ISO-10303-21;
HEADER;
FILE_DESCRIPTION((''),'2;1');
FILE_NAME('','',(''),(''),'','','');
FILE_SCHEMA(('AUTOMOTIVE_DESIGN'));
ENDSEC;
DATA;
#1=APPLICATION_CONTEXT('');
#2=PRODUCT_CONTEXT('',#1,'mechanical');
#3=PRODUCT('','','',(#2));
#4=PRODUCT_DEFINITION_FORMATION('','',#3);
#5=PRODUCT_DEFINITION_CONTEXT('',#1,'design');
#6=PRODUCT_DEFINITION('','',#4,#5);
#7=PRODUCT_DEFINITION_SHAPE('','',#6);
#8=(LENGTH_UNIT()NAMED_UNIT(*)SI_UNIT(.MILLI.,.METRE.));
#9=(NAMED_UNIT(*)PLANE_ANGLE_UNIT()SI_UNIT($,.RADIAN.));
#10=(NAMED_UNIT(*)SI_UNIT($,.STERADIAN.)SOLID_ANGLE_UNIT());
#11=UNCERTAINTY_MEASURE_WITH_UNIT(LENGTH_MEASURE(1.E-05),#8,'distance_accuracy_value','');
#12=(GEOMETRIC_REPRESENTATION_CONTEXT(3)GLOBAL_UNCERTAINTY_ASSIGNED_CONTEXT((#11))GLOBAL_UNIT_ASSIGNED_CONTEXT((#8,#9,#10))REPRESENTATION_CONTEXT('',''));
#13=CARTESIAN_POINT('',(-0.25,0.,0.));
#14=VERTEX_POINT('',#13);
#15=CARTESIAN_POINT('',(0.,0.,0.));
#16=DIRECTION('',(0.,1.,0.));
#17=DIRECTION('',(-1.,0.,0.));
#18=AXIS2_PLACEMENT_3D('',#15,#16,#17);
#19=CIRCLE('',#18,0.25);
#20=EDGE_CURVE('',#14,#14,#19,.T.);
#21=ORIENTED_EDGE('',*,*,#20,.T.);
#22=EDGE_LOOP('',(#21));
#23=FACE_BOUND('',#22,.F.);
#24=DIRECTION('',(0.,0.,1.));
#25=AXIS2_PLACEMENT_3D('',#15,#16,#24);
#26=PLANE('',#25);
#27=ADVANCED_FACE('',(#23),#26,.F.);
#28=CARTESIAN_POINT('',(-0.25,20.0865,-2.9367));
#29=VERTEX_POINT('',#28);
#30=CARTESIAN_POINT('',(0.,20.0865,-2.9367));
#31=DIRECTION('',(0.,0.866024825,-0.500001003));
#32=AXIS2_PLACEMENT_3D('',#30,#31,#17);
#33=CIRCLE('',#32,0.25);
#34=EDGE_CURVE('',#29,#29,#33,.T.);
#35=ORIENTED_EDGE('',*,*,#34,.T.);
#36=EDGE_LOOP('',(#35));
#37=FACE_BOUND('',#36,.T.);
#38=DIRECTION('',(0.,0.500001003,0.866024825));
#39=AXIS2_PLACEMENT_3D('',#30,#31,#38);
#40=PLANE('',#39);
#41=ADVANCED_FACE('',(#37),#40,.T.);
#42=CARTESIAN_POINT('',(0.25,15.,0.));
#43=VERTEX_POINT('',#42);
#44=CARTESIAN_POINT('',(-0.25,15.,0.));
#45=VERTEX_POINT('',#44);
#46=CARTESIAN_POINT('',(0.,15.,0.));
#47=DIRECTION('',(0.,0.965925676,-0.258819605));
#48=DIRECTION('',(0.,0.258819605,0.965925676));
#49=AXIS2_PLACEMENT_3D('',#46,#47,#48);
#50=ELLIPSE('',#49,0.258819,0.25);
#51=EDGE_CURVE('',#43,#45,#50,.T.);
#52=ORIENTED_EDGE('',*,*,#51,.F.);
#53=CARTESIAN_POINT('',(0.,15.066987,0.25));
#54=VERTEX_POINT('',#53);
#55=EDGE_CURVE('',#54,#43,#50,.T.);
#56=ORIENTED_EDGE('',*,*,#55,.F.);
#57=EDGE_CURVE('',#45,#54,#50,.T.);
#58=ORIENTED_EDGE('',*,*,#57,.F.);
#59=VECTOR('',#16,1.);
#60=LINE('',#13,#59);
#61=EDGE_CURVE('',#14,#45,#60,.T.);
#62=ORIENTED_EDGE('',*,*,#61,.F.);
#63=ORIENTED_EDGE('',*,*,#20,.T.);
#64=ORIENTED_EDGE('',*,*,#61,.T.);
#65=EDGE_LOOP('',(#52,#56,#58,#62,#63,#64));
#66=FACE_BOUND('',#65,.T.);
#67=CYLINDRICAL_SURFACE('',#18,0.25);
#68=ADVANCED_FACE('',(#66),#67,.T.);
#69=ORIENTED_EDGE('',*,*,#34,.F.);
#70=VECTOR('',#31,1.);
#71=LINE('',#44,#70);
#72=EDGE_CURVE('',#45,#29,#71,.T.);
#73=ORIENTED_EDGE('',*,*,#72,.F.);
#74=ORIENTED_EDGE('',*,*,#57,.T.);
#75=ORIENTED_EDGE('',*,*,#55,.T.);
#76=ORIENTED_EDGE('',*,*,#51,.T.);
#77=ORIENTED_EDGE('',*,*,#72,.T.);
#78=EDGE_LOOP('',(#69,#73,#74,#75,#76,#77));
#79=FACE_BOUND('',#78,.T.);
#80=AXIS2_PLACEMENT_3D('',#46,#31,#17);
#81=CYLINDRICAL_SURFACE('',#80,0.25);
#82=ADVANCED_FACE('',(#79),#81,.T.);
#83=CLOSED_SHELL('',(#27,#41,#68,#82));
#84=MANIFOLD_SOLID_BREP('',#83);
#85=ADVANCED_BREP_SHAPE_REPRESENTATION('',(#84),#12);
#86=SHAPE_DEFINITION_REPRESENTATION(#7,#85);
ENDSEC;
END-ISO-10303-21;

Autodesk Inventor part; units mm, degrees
ref_plane "YZ Plane" through (0, 0, 0) normal (1, 0, 0) x (0, 1, 0)
ref_plane "XZ Plane" through (0, 0, 0) normal (0, 1, 0) x (-1, 0, 0)
ref_plane "XY Plane" through (0, 0, 0) normal (0, 0, 1) x (1, 0, 0)
sketch "Sketch1" plane through (0, 0, 0) normal (0, 1, 0) x (-1, 0, 0)
  circle A0 centre (0, 0) radius 0.25
  dimension "d0" = 0.5
sketch "Sketch2" plane through (0, 0, 0) normal (1, 0, 0) x (0, 1, 0)
  line L0 (0, 0) -> (15, 0)
  line L1 (15, 0) -> (20.0865, -2.9367)
  dimension "d1" = 15
  dimension "d2" = 150
sweep "Sweep1" add profiles "Sketch1" path "Sketch2"
properties part number "cable 60°"
